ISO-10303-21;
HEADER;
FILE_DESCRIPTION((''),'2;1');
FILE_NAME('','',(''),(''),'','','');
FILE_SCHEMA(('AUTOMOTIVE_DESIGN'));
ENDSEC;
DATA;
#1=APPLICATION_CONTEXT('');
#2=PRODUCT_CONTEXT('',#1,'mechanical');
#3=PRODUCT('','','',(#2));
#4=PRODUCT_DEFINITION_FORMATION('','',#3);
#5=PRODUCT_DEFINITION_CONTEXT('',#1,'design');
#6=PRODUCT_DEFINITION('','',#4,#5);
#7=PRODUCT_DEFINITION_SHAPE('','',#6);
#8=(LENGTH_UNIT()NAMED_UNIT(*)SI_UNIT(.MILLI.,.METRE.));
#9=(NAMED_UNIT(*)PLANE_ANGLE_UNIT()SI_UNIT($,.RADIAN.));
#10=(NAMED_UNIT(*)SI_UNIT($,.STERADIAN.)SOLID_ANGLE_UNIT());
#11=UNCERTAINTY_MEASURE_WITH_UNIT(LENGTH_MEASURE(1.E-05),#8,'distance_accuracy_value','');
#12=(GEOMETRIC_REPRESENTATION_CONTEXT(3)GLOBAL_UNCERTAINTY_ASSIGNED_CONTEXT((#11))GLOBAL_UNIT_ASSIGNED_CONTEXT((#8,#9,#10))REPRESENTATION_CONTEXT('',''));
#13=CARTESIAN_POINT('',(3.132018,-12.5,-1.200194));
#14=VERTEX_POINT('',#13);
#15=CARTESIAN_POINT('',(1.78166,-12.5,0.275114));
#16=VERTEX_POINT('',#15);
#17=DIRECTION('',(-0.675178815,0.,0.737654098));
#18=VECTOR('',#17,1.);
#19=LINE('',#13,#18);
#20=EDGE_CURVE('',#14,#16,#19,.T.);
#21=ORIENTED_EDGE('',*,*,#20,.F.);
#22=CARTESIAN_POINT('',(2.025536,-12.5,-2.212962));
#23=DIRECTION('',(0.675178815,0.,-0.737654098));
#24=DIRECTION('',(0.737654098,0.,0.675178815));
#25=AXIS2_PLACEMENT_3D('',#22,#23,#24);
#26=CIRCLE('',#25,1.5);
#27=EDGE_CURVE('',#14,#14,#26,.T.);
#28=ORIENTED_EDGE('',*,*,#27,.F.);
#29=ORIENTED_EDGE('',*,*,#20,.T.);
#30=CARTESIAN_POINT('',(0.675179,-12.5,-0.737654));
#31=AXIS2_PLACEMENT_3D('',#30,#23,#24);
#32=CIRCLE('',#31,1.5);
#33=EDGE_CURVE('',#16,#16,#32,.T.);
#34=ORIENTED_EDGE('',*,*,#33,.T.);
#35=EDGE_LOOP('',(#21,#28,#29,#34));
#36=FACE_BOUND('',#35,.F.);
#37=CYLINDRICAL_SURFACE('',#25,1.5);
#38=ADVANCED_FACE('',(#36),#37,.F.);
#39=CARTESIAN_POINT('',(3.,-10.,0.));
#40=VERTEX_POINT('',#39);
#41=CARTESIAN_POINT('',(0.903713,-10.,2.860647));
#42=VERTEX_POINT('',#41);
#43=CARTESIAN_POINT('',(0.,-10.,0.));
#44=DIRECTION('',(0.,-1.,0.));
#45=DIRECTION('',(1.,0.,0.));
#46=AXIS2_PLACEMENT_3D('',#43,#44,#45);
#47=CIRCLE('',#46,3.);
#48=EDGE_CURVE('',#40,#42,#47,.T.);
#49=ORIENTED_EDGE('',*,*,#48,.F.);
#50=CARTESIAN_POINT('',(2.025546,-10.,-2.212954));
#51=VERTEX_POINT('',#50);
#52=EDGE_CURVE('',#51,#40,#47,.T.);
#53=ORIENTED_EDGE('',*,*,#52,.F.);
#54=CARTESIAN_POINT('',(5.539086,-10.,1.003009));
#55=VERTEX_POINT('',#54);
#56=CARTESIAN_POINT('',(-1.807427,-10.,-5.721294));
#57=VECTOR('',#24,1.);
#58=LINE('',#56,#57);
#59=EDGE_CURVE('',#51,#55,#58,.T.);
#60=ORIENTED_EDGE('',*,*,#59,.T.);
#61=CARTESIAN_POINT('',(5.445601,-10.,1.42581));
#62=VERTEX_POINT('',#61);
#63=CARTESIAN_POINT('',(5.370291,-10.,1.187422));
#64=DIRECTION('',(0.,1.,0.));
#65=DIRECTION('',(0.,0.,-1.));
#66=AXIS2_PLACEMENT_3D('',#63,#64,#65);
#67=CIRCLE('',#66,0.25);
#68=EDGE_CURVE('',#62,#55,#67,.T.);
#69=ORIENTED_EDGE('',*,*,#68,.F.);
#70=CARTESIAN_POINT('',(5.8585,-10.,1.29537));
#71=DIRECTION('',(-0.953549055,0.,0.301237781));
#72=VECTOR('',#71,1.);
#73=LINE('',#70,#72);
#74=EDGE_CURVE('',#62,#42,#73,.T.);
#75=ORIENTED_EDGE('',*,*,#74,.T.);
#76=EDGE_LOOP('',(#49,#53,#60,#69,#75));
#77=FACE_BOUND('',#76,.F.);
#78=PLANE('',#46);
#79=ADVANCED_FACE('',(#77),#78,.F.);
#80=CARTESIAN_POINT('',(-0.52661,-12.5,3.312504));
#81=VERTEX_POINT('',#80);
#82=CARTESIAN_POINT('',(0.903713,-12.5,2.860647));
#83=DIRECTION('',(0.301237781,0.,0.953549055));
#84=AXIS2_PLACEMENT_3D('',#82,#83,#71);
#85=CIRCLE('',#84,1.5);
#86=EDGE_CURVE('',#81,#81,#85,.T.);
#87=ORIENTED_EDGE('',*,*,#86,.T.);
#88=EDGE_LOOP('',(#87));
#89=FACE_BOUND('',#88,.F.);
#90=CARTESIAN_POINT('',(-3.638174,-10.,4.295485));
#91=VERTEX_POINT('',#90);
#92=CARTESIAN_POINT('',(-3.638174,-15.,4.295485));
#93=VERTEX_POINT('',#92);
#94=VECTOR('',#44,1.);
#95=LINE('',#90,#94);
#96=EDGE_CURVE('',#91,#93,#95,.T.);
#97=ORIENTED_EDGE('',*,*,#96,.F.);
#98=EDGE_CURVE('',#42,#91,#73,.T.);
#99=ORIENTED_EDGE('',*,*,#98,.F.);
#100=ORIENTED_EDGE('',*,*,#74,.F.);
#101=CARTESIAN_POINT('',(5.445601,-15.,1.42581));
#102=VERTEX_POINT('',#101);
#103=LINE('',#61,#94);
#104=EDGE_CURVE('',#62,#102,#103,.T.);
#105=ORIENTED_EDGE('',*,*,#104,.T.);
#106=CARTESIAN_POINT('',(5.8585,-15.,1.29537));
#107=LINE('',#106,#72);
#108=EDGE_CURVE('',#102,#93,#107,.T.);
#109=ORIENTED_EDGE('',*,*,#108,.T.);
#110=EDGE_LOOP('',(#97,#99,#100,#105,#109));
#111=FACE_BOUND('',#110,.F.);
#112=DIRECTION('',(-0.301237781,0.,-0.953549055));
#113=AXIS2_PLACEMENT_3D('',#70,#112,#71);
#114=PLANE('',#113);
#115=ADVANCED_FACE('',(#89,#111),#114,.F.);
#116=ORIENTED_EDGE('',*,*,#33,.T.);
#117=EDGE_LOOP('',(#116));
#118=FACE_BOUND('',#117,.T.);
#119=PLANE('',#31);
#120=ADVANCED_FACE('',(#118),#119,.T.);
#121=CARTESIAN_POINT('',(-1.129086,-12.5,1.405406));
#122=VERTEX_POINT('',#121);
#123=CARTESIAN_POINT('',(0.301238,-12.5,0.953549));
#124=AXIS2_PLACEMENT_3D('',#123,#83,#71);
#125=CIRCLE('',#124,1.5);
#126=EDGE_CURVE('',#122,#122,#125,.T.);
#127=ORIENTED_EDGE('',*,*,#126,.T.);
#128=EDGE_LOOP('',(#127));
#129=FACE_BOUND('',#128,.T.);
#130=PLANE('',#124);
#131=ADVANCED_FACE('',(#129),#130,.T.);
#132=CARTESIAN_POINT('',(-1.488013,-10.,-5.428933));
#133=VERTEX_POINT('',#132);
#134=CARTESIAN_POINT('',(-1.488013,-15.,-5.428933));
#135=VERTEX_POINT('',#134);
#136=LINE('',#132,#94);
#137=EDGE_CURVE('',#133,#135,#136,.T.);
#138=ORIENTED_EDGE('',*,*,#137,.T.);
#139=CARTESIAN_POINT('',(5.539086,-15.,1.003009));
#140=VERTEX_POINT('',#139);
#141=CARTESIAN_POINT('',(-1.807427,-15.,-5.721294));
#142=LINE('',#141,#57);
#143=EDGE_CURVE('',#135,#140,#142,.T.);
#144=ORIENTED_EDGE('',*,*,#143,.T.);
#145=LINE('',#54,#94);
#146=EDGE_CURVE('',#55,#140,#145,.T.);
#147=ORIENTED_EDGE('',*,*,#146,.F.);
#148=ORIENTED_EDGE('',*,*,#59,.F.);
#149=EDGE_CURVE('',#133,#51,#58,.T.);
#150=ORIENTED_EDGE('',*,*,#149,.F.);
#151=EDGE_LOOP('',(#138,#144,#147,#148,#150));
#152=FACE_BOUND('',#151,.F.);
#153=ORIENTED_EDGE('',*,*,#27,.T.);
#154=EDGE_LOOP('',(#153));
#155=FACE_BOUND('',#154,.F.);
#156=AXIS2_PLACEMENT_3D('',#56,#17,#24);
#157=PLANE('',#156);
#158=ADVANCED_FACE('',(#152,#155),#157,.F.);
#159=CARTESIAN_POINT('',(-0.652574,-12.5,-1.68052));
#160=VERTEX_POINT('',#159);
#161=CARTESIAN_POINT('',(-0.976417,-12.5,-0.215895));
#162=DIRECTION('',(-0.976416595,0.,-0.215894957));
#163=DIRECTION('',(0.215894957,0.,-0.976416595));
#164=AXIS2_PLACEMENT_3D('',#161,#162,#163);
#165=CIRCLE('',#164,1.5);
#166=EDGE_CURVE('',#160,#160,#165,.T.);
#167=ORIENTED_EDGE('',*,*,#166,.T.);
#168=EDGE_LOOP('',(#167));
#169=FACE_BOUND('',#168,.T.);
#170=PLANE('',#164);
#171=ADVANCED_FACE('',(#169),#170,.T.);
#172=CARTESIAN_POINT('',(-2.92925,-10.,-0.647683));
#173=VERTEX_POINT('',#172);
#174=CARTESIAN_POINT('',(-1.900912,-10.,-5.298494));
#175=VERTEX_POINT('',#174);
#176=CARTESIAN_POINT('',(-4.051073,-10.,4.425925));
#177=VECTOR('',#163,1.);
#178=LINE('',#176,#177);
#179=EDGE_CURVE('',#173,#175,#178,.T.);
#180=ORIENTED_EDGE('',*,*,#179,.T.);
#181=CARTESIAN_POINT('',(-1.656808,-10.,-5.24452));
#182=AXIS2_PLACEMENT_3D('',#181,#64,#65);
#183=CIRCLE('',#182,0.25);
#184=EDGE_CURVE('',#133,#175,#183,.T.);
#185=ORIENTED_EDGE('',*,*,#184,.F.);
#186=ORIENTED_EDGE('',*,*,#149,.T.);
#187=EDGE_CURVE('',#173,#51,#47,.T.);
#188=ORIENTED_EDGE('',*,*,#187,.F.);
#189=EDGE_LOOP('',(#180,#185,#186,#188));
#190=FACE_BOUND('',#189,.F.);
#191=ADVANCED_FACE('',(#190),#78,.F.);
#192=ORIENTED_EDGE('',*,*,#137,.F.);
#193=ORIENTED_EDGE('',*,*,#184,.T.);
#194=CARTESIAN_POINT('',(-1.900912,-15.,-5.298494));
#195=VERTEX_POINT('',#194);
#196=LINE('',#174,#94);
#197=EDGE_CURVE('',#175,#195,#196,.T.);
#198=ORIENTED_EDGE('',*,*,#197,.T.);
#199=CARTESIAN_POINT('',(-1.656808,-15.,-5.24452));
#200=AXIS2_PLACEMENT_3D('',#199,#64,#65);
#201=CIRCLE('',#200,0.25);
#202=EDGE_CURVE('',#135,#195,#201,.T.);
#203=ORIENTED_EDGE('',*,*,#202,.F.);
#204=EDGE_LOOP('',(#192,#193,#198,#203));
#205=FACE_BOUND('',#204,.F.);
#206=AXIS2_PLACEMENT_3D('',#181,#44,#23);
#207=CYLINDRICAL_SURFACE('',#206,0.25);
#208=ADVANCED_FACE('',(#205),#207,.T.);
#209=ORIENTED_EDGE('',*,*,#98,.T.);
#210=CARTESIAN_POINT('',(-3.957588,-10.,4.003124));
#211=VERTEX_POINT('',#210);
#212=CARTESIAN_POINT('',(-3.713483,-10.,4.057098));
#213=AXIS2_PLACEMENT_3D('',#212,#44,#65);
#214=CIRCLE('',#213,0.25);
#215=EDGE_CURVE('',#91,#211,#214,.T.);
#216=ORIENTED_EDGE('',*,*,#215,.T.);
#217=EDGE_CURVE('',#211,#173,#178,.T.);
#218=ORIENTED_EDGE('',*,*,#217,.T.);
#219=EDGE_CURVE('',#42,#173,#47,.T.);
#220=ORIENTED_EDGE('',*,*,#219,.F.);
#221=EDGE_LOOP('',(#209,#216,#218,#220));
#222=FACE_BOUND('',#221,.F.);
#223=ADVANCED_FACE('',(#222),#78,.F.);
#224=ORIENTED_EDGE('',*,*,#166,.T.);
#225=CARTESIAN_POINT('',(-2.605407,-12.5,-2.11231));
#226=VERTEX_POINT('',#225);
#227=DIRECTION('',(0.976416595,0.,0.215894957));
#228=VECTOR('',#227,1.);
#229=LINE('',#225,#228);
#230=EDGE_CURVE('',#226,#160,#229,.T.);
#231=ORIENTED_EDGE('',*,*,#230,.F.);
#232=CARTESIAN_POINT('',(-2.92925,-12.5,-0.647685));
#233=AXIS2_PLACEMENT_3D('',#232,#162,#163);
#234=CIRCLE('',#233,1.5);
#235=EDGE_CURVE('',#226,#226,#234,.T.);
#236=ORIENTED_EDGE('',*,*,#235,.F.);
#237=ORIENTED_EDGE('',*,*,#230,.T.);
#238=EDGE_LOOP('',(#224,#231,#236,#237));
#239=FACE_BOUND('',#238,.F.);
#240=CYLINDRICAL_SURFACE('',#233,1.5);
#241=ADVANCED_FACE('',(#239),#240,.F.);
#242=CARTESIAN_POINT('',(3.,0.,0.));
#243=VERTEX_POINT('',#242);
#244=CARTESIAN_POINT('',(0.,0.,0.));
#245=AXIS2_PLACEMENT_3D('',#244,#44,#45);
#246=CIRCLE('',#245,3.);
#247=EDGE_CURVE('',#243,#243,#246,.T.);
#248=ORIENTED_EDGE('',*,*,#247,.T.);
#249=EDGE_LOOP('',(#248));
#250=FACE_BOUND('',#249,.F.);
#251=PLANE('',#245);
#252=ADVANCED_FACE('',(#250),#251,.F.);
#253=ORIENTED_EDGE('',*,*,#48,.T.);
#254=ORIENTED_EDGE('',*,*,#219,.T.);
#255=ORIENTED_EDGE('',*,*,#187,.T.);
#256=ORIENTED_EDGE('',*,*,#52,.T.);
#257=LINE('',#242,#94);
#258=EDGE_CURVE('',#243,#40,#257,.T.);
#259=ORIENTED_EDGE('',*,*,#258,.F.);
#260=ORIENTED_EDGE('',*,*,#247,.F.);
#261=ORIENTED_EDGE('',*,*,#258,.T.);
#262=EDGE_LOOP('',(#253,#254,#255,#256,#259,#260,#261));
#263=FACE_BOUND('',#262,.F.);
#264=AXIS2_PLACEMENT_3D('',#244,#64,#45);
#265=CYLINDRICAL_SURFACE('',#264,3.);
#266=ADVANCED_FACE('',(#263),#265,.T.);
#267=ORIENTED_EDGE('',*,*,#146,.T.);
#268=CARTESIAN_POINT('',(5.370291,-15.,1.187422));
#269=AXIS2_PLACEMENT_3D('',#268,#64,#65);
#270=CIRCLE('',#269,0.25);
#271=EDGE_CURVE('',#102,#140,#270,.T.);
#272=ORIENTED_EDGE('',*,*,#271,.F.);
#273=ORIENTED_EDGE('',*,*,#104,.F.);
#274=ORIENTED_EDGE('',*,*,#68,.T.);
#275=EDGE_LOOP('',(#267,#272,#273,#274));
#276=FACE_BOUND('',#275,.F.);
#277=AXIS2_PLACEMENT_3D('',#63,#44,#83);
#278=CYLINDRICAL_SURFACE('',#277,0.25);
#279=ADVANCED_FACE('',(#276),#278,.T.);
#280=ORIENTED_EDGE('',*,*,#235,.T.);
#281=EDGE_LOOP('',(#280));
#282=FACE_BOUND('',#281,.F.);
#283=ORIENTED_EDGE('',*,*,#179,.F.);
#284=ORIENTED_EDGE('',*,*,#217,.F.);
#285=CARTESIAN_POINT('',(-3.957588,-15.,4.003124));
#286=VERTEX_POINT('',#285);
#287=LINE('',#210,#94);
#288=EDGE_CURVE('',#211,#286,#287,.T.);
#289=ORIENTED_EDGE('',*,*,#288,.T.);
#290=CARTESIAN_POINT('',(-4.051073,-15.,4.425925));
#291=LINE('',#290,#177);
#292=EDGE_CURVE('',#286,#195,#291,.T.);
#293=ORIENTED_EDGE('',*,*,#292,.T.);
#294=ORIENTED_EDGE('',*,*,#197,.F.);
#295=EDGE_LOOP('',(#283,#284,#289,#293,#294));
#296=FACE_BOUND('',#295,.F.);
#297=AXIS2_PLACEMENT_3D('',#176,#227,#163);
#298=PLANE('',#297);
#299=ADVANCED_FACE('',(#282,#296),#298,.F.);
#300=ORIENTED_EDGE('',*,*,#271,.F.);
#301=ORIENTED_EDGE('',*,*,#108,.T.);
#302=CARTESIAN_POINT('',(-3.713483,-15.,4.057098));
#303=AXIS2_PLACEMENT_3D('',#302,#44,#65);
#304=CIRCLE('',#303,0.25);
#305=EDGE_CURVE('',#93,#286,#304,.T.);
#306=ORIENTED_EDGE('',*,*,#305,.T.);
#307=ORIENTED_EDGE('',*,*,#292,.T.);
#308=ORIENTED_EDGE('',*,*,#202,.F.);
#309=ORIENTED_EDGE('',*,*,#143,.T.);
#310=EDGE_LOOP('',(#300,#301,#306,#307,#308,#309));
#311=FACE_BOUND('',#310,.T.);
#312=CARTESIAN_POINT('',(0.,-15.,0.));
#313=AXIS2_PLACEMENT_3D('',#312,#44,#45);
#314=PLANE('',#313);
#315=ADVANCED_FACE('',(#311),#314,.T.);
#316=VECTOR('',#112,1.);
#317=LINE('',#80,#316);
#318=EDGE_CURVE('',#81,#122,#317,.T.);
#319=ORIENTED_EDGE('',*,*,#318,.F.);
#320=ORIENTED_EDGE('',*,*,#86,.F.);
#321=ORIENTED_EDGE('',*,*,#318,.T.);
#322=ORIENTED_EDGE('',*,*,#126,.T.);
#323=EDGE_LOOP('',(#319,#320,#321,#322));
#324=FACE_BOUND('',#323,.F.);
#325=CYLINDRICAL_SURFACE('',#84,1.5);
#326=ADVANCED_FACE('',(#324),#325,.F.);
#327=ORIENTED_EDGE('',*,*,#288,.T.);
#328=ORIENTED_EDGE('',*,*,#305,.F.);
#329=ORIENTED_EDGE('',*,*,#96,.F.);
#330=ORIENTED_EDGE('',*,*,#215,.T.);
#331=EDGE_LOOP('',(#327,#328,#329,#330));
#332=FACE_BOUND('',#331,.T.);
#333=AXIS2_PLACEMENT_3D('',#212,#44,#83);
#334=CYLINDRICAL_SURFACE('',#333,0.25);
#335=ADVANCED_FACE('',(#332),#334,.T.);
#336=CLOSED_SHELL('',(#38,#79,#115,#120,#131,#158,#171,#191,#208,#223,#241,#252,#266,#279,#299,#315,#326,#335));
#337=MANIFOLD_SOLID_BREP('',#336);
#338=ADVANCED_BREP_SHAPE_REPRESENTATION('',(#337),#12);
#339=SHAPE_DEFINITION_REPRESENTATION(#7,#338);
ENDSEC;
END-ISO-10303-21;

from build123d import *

# Parameters (mm, degrees)
F0_R            = 3
F1_DEPTH        = 10
F3_DEPTH        = 5
F5_R            = 1.5
F6_DEPTH        = 2
F6_COPIES_COUNT = 3
F7_R            = 0.25


# Not quite as in the source:
# - a pattern or mirror of a feature is missing from the dataset's text; its kind, count and spacing are read off the source's solid


with BuildPart() as f1:
    # F0 (on Front) → F1 (new body)
    with BuildSketch(Plane.XZ):
        Circle(F0_R)
    extrude(amount=F1_DEPTH)

    # F2 (on face) → F3 (join)
    with BuildSketch(Plane.XZ.offset(10)):
        Polygon((5.858499572, 1.2953697407), (-4.0510728887, 4.4259245871), (-1.8074266833, -5.7212943277), align=None)
    extrude(amount=F3_DEPTH)

    # F5 (on face) → F6 (cut)
    with BuildSketch(Plane(origin=(2.0255364444, 0, -2.2129622935), x_dir=(0.7376540978, 0, 0.6751788148), z_dir=(0.6751788148, 0, -0.7376540978))):
        with Locations((0, 12.5)):
            Circle(F5_R)
    f6 = extrude(amount=-F6_DEPTH, mode=Mode.SUBTRACT)

    # F6_copies: F6 ×3 about axis
    f6_copies_axis = Axis((0, 0, 0), (0, 1, 0))
    for i in range(1, F6_COPIES_COUNT):
        add(f6.rotate(f6_copies_axis, i * 360 / F6_COPIES_COUNT), mode=Mode.SUBTRACT)

    # F7
    f7_edges = [f1.edges().sort_by_distance(p)[0] for p in [
        (5.8585, -12.5, 1.29537),
        (-4.051073, -12.5, 4.425925),
        (-1.807427, -12.5, -5.721294),
    ]]
    fillet(f7_edges, radius=F7_R)


solid = f1.part
